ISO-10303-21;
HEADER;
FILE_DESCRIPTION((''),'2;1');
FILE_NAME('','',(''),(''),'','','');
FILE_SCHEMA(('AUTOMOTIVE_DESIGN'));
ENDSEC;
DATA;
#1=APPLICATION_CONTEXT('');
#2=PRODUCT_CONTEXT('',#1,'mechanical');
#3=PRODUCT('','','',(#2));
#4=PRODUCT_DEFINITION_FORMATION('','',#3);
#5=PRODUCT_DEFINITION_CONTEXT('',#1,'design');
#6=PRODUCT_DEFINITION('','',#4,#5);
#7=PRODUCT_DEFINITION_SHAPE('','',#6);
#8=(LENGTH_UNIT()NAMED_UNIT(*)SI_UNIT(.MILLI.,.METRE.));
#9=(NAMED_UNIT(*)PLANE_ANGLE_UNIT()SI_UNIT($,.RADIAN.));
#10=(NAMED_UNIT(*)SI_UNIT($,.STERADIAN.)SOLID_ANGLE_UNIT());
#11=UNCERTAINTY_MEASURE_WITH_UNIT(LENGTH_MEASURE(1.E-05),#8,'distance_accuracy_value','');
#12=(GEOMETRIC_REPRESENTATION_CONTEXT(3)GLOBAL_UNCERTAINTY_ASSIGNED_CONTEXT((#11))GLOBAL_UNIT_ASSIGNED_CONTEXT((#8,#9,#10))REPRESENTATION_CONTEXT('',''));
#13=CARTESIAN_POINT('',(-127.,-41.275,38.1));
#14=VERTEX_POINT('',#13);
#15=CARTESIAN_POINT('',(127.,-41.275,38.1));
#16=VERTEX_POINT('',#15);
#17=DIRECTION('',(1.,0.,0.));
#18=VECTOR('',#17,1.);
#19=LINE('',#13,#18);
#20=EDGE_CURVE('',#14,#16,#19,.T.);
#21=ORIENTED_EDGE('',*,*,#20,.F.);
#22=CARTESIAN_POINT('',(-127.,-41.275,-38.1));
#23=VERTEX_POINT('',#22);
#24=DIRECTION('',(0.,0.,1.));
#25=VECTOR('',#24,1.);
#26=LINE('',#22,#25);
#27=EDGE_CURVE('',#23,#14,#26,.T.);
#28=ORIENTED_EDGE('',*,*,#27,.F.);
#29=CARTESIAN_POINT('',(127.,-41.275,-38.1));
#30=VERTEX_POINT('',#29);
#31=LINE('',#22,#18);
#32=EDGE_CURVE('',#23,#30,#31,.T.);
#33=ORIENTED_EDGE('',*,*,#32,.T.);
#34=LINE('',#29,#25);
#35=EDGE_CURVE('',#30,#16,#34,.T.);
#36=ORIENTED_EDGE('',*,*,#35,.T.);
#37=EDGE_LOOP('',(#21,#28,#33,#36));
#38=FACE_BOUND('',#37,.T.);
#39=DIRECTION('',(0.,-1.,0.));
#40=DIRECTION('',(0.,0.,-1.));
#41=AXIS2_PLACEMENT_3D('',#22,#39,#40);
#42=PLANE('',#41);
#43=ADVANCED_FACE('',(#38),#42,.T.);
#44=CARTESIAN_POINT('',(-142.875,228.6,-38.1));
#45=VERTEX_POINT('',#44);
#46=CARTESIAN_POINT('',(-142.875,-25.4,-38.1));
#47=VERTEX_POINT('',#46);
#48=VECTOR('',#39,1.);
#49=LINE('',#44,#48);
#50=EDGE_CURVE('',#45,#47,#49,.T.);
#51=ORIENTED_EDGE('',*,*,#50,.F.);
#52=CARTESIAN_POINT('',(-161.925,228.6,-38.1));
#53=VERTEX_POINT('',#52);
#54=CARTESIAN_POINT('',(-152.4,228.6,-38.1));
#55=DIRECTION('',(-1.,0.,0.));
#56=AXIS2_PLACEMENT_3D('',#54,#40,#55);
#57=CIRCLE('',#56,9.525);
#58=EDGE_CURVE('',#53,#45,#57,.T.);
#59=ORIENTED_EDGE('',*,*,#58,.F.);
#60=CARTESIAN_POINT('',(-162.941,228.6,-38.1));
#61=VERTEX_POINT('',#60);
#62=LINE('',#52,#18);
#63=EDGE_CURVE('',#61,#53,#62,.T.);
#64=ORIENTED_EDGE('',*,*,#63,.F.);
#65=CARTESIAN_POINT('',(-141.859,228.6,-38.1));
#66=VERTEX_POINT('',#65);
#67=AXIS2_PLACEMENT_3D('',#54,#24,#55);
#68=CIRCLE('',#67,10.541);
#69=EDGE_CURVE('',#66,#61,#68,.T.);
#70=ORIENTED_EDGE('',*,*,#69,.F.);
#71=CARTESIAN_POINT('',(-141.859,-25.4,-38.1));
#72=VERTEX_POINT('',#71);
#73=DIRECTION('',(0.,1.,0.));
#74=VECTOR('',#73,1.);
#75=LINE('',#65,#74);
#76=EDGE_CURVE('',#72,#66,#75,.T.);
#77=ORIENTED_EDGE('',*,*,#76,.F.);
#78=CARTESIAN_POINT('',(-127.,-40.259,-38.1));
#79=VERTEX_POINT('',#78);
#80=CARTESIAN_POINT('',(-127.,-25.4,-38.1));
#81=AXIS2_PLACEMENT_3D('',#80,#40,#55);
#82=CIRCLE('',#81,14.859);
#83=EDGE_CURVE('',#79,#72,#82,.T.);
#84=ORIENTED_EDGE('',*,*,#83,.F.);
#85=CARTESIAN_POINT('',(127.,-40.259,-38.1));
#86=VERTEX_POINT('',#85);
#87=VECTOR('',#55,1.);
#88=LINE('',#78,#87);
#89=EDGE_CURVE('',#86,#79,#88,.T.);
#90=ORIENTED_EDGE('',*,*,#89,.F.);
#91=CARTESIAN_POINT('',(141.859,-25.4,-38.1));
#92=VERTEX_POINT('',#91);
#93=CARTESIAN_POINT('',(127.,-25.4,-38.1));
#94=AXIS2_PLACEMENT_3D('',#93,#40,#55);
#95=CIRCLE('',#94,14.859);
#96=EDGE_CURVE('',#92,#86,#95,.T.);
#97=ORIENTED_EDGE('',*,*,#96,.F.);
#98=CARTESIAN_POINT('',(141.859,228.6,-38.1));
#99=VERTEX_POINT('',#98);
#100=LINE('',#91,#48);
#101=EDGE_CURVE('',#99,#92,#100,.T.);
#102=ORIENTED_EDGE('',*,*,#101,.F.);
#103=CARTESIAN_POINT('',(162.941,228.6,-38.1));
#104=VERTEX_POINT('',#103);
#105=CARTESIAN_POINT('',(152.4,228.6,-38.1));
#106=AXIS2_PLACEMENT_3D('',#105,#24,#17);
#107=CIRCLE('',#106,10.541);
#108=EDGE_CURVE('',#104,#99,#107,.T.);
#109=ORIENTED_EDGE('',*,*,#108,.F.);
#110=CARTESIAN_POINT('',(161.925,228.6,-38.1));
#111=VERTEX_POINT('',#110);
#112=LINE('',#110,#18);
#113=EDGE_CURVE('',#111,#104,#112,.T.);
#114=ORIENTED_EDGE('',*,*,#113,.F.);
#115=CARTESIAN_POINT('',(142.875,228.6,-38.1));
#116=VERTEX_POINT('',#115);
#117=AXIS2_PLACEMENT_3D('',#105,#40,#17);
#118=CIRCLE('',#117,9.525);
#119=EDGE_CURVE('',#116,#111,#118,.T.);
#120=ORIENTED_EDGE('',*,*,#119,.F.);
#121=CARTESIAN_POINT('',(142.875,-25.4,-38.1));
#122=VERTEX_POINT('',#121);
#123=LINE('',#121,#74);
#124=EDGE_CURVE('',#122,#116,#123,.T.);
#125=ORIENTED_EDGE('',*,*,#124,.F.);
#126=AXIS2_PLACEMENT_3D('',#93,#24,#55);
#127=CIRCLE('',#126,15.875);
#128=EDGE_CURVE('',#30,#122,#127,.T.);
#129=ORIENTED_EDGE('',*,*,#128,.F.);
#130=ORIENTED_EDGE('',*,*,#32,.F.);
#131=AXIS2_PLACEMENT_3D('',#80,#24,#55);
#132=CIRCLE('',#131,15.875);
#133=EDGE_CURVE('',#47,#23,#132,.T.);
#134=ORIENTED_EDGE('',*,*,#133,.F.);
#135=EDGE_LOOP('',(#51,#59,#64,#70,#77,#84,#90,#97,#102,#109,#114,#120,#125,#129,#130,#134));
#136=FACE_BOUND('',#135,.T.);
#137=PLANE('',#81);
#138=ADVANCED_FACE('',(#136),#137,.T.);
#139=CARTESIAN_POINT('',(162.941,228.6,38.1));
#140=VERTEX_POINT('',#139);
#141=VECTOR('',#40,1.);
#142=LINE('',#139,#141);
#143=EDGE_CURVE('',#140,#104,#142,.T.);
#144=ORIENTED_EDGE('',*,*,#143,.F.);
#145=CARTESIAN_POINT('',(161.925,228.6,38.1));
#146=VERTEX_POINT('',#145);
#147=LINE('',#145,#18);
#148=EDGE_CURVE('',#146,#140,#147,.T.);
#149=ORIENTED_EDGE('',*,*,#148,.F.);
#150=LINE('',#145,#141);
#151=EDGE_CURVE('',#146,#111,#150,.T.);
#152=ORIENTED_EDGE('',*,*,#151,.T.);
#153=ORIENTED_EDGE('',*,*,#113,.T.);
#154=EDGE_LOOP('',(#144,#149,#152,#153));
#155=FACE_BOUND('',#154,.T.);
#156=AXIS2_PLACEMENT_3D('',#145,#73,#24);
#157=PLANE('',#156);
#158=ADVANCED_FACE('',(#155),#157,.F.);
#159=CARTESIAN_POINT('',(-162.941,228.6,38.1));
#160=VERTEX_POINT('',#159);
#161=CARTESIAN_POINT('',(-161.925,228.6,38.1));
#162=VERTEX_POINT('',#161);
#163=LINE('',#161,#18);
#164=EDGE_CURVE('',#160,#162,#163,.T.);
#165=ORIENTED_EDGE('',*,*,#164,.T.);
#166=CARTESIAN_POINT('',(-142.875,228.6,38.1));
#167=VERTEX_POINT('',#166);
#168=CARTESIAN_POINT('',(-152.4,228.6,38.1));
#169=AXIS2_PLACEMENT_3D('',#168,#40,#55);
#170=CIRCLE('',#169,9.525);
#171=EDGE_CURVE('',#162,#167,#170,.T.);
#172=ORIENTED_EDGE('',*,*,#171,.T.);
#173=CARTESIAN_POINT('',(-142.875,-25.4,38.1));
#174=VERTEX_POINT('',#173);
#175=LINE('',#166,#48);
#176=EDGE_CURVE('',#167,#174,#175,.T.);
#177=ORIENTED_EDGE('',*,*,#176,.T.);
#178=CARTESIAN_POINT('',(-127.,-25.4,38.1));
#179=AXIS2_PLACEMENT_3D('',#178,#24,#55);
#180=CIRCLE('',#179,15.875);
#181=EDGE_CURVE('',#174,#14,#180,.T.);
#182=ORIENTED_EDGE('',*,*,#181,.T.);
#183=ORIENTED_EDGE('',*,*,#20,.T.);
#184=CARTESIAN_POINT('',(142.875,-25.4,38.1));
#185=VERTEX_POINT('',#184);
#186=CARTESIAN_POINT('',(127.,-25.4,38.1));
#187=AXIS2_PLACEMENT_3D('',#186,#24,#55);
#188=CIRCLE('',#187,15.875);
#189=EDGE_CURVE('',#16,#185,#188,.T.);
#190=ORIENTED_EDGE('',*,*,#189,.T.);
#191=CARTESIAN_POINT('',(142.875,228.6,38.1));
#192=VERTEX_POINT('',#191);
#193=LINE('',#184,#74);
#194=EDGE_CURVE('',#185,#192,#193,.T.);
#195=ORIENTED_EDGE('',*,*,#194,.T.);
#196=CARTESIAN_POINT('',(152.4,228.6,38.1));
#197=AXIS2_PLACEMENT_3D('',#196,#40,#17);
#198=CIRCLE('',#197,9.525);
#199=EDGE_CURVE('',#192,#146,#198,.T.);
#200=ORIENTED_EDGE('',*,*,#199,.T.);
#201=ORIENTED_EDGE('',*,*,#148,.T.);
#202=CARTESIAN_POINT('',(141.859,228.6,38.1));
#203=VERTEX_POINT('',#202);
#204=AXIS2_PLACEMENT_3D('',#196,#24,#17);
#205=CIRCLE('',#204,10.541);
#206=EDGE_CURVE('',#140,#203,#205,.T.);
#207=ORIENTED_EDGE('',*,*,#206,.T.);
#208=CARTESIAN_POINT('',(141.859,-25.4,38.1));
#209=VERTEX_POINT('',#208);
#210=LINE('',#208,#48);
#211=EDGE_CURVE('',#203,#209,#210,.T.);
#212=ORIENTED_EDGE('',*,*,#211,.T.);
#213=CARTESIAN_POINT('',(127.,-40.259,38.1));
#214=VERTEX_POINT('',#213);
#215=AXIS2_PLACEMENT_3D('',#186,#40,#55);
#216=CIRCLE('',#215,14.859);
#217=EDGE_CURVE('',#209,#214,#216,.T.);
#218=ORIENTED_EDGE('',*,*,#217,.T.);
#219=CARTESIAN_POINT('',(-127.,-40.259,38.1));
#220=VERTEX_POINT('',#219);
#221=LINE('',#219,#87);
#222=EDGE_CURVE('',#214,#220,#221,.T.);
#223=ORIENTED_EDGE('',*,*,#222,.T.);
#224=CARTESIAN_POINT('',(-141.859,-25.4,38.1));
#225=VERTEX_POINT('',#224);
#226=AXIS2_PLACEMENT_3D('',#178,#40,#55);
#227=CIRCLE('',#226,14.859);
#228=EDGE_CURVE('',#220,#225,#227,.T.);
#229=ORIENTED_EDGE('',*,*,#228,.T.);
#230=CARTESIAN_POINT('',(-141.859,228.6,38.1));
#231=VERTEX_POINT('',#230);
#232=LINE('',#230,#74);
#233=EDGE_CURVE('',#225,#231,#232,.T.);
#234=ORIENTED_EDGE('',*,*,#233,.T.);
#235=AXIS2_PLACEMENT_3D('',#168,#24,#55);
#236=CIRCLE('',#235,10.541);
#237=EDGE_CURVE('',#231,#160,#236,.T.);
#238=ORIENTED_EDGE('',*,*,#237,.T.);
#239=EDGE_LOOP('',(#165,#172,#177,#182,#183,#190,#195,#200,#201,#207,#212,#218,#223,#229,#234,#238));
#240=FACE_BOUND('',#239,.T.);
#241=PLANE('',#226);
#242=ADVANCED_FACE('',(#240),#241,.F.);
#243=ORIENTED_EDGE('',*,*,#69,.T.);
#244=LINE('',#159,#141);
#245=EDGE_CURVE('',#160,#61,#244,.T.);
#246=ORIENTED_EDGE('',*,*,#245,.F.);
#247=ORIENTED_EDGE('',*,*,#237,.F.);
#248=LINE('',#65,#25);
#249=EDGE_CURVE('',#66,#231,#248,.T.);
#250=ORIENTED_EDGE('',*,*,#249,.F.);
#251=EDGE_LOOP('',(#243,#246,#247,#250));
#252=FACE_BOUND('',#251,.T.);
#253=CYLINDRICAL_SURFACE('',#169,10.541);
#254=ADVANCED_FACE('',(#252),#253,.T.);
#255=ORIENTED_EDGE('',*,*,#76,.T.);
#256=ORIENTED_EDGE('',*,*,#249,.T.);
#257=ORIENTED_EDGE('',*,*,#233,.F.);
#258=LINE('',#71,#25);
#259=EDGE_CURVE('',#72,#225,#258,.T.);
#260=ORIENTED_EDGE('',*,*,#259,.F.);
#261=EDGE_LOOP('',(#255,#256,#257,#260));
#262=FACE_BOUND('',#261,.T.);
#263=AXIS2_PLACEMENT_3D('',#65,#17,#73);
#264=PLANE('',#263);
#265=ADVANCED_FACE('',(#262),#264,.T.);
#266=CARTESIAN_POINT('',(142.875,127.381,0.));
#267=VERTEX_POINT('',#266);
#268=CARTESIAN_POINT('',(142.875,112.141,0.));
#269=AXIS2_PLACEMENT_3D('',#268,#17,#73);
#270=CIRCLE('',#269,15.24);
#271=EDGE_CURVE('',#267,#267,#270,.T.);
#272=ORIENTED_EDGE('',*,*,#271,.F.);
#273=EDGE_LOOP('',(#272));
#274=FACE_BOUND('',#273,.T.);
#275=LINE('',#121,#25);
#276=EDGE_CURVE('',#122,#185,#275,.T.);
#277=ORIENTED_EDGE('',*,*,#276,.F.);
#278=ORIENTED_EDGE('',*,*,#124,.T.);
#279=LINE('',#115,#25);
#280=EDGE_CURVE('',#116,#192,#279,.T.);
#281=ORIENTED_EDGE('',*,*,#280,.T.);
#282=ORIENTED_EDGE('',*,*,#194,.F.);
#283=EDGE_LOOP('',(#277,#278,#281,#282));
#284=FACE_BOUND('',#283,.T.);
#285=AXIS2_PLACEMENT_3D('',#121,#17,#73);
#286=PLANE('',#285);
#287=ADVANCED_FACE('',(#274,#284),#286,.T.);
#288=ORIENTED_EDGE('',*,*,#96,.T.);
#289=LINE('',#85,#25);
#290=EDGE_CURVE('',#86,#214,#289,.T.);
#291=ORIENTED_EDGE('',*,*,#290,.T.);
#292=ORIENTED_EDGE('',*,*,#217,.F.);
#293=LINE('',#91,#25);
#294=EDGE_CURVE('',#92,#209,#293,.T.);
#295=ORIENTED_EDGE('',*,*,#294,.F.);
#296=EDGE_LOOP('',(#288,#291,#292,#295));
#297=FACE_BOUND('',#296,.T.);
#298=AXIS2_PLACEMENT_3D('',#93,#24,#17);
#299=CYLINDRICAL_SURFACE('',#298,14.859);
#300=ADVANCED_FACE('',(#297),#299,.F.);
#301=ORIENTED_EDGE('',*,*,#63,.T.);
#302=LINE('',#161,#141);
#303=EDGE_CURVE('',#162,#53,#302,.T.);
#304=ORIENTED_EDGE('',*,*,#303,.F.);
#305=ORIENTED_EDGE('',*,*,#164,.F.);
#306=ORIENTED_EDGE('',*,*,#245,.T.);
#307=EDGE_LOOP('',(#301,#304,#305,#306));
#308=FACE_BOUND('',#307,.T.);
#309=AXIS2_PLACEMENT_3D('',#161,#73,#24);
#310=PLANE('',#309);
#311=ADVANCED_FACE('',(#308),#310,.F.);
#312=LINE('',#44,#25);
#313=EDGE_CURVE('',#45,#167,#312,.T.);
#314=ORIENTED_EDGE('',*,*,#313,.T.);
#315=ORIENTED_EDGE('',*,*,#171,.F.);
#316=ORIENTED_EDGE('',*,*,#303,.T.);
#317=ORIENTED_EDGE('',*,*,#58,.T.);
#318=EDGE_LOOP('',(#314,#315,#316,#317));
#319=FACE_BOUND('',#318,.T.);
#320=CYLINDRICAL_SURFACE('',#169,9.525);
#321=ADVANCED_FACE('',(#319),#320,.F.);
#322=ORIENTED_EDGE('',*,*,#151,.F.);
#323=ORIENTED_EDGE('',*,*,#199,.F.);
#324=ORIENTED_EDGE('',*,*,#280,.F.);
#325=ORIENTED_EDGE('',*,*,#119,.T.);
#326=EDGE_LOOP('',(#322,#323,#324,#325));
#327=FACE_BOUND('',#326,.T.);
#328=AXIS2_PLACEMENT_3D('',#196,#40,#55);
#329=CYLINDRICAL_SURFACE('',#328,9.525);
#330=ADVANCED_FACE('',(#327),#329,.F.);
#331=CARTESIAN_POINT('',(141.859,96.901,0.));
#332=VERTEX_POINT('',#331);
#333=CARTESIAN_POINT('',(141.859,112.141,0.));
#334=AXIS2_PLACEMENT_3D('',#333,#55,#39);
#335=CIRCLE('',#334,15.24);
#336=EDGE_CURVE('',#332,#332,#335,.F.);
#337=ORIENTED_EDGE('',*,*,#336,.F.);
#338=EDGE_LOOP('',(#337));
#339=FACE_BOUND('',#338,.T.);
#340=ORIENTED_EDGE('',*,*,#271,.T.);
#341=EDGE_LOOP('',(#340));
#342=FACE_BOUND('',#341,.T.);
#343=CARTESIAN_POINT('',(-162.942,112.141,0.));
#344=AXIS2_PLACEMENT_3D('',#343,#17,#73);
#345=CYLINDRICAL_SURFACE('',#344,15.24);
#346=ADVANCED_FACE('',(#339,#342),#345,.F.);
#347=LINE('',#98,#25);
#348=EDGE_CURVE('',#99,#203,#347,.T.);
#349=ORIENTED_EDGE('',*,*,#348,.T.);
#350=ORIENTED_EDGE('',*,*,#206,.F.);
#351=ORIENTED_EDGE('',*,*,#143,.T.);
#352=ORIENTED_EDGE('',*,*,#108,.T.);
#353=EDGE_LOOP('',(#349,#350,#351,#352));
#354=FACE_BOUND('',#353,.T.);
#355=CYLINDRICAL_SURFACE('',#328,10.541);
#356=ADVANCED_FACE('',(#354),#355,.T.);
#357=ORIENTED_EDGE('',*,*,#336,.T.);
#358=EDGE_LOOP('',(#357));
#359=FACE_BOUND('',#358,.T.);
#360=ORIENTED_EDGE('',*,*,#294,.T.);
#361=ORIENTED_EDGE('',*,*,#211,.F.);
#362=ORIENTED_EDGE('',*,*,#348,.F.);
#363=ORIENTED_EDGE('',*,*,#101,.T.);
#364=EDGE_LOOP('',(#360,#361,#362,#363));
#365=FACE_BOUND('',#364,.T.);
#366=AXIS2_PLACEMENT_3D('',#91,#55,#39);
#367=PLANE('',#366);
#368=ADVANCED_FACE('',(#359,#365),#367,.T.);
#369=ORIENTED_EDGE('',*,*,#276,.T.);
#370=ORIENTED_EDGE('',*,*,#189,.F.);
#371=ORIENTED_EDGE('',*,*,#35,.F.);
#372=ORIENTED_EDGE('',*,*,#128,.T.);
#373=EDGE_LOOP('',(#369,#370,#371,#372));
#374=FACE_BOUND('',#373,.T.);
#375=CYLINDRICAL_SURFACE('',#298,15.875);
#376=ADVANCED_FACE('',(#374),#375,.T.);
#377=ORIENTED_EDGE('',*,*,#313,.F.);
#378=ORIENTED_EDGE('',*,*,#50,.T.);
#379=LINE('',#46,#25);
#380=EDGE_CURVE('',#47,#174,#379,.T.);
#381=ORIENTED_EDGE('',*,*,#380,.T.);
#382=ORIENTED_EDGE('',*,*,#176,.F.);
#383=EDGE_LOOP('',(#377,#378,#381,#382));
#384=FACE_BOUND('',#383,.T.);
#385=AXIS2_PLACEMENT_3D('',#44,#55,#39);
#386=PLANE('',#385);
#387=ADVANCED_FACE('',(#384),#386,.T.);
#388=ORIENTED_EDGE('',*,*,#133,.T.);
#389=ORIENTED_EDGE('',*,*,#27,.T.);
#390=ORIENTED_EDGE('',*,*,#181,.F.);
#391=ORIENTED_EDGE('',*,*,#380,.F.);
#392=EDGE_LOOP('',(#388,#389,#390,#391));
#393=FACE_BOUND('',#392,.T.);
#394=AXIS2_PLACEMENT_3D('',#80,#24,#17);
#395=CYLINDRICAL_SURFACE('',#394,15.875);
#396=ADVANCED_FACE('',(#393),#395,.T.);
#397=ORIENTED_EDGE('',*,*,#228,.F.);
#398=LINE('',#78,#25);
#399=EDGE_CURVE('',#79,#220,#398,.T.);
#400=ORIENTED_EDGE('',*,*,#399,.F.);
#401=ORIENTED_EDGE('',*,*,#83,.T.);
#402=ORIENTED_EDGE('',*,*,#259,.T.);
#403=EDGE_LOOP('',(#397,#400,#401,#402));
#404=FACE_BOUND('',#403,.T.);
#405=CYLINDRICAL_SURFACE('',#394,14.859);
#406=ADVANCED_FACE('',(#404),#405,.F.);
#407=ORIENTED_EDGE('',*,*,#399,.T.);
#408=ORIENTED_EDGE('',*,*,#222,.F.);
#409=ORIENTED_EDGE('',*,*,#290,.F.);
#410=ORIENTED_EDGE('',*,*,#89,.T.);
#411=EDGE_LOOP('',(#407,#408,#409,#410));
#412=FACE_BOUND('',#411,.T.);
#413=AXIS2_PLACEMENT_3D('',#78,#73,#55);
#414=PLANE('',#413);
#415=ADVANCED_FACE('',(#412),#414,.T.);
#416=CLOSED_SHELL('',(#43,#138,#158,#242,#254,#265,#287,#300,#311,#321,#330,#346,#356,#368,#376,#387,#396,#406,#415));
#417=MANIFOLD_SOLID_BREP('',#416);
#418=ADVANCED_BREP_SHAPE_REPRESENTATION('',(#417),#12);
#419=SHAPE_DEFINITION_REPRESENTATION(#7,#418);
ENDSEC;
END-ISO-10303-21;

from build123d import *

# Parameters (mm, degrees)
STOCK_ROPE_START                        = -38.1
STOCK_ROPE_ROBOT_CHASSIS_MASTER_1_DEPTH = 76.2
CUT_EXTRUDE1_REACH                      = 392.081
SKETCH1_R                               = 15.24


# Read off the part's stored shape, not the designer's step: Stock-Rope Robot Chassis Master-1
with BuildPart() as part:
    # Stock-Rope Robot Chassis Master-1 outlin → Stock-Rope Robot Chassis Master-1 (new body)
    with BuildSketch(Plane.XY.offset(STOCK_ROPE_START)):
        with BuildLine():
            ThreePointArc((-127, -40.259), (-137.506899662, -35.906899662), (-141.859, -25.4))
            Line((-141.859, -25.4), (-141.859, 228.6))
            ThreePointArc((-141.859, 228.6), (-152.4, 239.141), (-162.941, 228.6))
            Line((-162.941, 228.6), (-161.925, 228.6))
            ThreePointArc((-161.925, 228.6), (-152.4, 238.125), (-142.875, 228.6))
            Line((-142.875, 228.6), (-142.875, -25.4))
            ThreePointArc((-142.875, -25.4), (-138.225320151, -36.625320151), (-127, -41.275))
            Line((-127, -41.275), (127, -41.275))
            ThreePointArc((127, -41.275), (138.225320151, -36.625320151), (142.875, -25.4))
            Line((142.875, -25.4), (142.875, 228.6))
            ThreePointArc((142.875, 228.6), (152.4, 238.125), (161.925, 228.6))
            Line((161.925, 228.6), (162.941, 228.6))
            ThreePointArc((162.941, 228.6), (152.4, 239.141), (141.859, 228.6))
            Line((141.859, 228.6), (141.859, -25.4))
            ThreePointArc((141.859, -25.4), (137.506899662, -35.906899662), (127, -40.259))
            Line((127, -40.259), (-127, -40.259))
        make_face()
    extrude(amount=STOCK_ROPE_ROBOT_CHASSIS_MASTER_1_DEPTH)

    # Sketch1 → Cut-Extrude1 (cut, up to next)
    with BuildSketch(Plane(origin=(142.875, 0, 0), x_dir=(0, 0, -1), z_dir=(1, 0, 0)), mode=Mode.PRIVATE) as cut_extrude1_sk1:
        with Locations(Location((0, 112.141, 0), (0, 0, 90))):
            Circle(SKETCH1_R)
    cut_extrude1_tool1 = extrude(cut_extrude1_sk1.sketch, amount=-CUT_EXTRUDE1_REACH, mode=Mode.PRIVATE) & part.part
    add(cut_extrude1_tool1.solids().sort_by_distance((142.875, 112.141, 0))[0], mode=Mode.SUBTRACT)


solid = part.part
